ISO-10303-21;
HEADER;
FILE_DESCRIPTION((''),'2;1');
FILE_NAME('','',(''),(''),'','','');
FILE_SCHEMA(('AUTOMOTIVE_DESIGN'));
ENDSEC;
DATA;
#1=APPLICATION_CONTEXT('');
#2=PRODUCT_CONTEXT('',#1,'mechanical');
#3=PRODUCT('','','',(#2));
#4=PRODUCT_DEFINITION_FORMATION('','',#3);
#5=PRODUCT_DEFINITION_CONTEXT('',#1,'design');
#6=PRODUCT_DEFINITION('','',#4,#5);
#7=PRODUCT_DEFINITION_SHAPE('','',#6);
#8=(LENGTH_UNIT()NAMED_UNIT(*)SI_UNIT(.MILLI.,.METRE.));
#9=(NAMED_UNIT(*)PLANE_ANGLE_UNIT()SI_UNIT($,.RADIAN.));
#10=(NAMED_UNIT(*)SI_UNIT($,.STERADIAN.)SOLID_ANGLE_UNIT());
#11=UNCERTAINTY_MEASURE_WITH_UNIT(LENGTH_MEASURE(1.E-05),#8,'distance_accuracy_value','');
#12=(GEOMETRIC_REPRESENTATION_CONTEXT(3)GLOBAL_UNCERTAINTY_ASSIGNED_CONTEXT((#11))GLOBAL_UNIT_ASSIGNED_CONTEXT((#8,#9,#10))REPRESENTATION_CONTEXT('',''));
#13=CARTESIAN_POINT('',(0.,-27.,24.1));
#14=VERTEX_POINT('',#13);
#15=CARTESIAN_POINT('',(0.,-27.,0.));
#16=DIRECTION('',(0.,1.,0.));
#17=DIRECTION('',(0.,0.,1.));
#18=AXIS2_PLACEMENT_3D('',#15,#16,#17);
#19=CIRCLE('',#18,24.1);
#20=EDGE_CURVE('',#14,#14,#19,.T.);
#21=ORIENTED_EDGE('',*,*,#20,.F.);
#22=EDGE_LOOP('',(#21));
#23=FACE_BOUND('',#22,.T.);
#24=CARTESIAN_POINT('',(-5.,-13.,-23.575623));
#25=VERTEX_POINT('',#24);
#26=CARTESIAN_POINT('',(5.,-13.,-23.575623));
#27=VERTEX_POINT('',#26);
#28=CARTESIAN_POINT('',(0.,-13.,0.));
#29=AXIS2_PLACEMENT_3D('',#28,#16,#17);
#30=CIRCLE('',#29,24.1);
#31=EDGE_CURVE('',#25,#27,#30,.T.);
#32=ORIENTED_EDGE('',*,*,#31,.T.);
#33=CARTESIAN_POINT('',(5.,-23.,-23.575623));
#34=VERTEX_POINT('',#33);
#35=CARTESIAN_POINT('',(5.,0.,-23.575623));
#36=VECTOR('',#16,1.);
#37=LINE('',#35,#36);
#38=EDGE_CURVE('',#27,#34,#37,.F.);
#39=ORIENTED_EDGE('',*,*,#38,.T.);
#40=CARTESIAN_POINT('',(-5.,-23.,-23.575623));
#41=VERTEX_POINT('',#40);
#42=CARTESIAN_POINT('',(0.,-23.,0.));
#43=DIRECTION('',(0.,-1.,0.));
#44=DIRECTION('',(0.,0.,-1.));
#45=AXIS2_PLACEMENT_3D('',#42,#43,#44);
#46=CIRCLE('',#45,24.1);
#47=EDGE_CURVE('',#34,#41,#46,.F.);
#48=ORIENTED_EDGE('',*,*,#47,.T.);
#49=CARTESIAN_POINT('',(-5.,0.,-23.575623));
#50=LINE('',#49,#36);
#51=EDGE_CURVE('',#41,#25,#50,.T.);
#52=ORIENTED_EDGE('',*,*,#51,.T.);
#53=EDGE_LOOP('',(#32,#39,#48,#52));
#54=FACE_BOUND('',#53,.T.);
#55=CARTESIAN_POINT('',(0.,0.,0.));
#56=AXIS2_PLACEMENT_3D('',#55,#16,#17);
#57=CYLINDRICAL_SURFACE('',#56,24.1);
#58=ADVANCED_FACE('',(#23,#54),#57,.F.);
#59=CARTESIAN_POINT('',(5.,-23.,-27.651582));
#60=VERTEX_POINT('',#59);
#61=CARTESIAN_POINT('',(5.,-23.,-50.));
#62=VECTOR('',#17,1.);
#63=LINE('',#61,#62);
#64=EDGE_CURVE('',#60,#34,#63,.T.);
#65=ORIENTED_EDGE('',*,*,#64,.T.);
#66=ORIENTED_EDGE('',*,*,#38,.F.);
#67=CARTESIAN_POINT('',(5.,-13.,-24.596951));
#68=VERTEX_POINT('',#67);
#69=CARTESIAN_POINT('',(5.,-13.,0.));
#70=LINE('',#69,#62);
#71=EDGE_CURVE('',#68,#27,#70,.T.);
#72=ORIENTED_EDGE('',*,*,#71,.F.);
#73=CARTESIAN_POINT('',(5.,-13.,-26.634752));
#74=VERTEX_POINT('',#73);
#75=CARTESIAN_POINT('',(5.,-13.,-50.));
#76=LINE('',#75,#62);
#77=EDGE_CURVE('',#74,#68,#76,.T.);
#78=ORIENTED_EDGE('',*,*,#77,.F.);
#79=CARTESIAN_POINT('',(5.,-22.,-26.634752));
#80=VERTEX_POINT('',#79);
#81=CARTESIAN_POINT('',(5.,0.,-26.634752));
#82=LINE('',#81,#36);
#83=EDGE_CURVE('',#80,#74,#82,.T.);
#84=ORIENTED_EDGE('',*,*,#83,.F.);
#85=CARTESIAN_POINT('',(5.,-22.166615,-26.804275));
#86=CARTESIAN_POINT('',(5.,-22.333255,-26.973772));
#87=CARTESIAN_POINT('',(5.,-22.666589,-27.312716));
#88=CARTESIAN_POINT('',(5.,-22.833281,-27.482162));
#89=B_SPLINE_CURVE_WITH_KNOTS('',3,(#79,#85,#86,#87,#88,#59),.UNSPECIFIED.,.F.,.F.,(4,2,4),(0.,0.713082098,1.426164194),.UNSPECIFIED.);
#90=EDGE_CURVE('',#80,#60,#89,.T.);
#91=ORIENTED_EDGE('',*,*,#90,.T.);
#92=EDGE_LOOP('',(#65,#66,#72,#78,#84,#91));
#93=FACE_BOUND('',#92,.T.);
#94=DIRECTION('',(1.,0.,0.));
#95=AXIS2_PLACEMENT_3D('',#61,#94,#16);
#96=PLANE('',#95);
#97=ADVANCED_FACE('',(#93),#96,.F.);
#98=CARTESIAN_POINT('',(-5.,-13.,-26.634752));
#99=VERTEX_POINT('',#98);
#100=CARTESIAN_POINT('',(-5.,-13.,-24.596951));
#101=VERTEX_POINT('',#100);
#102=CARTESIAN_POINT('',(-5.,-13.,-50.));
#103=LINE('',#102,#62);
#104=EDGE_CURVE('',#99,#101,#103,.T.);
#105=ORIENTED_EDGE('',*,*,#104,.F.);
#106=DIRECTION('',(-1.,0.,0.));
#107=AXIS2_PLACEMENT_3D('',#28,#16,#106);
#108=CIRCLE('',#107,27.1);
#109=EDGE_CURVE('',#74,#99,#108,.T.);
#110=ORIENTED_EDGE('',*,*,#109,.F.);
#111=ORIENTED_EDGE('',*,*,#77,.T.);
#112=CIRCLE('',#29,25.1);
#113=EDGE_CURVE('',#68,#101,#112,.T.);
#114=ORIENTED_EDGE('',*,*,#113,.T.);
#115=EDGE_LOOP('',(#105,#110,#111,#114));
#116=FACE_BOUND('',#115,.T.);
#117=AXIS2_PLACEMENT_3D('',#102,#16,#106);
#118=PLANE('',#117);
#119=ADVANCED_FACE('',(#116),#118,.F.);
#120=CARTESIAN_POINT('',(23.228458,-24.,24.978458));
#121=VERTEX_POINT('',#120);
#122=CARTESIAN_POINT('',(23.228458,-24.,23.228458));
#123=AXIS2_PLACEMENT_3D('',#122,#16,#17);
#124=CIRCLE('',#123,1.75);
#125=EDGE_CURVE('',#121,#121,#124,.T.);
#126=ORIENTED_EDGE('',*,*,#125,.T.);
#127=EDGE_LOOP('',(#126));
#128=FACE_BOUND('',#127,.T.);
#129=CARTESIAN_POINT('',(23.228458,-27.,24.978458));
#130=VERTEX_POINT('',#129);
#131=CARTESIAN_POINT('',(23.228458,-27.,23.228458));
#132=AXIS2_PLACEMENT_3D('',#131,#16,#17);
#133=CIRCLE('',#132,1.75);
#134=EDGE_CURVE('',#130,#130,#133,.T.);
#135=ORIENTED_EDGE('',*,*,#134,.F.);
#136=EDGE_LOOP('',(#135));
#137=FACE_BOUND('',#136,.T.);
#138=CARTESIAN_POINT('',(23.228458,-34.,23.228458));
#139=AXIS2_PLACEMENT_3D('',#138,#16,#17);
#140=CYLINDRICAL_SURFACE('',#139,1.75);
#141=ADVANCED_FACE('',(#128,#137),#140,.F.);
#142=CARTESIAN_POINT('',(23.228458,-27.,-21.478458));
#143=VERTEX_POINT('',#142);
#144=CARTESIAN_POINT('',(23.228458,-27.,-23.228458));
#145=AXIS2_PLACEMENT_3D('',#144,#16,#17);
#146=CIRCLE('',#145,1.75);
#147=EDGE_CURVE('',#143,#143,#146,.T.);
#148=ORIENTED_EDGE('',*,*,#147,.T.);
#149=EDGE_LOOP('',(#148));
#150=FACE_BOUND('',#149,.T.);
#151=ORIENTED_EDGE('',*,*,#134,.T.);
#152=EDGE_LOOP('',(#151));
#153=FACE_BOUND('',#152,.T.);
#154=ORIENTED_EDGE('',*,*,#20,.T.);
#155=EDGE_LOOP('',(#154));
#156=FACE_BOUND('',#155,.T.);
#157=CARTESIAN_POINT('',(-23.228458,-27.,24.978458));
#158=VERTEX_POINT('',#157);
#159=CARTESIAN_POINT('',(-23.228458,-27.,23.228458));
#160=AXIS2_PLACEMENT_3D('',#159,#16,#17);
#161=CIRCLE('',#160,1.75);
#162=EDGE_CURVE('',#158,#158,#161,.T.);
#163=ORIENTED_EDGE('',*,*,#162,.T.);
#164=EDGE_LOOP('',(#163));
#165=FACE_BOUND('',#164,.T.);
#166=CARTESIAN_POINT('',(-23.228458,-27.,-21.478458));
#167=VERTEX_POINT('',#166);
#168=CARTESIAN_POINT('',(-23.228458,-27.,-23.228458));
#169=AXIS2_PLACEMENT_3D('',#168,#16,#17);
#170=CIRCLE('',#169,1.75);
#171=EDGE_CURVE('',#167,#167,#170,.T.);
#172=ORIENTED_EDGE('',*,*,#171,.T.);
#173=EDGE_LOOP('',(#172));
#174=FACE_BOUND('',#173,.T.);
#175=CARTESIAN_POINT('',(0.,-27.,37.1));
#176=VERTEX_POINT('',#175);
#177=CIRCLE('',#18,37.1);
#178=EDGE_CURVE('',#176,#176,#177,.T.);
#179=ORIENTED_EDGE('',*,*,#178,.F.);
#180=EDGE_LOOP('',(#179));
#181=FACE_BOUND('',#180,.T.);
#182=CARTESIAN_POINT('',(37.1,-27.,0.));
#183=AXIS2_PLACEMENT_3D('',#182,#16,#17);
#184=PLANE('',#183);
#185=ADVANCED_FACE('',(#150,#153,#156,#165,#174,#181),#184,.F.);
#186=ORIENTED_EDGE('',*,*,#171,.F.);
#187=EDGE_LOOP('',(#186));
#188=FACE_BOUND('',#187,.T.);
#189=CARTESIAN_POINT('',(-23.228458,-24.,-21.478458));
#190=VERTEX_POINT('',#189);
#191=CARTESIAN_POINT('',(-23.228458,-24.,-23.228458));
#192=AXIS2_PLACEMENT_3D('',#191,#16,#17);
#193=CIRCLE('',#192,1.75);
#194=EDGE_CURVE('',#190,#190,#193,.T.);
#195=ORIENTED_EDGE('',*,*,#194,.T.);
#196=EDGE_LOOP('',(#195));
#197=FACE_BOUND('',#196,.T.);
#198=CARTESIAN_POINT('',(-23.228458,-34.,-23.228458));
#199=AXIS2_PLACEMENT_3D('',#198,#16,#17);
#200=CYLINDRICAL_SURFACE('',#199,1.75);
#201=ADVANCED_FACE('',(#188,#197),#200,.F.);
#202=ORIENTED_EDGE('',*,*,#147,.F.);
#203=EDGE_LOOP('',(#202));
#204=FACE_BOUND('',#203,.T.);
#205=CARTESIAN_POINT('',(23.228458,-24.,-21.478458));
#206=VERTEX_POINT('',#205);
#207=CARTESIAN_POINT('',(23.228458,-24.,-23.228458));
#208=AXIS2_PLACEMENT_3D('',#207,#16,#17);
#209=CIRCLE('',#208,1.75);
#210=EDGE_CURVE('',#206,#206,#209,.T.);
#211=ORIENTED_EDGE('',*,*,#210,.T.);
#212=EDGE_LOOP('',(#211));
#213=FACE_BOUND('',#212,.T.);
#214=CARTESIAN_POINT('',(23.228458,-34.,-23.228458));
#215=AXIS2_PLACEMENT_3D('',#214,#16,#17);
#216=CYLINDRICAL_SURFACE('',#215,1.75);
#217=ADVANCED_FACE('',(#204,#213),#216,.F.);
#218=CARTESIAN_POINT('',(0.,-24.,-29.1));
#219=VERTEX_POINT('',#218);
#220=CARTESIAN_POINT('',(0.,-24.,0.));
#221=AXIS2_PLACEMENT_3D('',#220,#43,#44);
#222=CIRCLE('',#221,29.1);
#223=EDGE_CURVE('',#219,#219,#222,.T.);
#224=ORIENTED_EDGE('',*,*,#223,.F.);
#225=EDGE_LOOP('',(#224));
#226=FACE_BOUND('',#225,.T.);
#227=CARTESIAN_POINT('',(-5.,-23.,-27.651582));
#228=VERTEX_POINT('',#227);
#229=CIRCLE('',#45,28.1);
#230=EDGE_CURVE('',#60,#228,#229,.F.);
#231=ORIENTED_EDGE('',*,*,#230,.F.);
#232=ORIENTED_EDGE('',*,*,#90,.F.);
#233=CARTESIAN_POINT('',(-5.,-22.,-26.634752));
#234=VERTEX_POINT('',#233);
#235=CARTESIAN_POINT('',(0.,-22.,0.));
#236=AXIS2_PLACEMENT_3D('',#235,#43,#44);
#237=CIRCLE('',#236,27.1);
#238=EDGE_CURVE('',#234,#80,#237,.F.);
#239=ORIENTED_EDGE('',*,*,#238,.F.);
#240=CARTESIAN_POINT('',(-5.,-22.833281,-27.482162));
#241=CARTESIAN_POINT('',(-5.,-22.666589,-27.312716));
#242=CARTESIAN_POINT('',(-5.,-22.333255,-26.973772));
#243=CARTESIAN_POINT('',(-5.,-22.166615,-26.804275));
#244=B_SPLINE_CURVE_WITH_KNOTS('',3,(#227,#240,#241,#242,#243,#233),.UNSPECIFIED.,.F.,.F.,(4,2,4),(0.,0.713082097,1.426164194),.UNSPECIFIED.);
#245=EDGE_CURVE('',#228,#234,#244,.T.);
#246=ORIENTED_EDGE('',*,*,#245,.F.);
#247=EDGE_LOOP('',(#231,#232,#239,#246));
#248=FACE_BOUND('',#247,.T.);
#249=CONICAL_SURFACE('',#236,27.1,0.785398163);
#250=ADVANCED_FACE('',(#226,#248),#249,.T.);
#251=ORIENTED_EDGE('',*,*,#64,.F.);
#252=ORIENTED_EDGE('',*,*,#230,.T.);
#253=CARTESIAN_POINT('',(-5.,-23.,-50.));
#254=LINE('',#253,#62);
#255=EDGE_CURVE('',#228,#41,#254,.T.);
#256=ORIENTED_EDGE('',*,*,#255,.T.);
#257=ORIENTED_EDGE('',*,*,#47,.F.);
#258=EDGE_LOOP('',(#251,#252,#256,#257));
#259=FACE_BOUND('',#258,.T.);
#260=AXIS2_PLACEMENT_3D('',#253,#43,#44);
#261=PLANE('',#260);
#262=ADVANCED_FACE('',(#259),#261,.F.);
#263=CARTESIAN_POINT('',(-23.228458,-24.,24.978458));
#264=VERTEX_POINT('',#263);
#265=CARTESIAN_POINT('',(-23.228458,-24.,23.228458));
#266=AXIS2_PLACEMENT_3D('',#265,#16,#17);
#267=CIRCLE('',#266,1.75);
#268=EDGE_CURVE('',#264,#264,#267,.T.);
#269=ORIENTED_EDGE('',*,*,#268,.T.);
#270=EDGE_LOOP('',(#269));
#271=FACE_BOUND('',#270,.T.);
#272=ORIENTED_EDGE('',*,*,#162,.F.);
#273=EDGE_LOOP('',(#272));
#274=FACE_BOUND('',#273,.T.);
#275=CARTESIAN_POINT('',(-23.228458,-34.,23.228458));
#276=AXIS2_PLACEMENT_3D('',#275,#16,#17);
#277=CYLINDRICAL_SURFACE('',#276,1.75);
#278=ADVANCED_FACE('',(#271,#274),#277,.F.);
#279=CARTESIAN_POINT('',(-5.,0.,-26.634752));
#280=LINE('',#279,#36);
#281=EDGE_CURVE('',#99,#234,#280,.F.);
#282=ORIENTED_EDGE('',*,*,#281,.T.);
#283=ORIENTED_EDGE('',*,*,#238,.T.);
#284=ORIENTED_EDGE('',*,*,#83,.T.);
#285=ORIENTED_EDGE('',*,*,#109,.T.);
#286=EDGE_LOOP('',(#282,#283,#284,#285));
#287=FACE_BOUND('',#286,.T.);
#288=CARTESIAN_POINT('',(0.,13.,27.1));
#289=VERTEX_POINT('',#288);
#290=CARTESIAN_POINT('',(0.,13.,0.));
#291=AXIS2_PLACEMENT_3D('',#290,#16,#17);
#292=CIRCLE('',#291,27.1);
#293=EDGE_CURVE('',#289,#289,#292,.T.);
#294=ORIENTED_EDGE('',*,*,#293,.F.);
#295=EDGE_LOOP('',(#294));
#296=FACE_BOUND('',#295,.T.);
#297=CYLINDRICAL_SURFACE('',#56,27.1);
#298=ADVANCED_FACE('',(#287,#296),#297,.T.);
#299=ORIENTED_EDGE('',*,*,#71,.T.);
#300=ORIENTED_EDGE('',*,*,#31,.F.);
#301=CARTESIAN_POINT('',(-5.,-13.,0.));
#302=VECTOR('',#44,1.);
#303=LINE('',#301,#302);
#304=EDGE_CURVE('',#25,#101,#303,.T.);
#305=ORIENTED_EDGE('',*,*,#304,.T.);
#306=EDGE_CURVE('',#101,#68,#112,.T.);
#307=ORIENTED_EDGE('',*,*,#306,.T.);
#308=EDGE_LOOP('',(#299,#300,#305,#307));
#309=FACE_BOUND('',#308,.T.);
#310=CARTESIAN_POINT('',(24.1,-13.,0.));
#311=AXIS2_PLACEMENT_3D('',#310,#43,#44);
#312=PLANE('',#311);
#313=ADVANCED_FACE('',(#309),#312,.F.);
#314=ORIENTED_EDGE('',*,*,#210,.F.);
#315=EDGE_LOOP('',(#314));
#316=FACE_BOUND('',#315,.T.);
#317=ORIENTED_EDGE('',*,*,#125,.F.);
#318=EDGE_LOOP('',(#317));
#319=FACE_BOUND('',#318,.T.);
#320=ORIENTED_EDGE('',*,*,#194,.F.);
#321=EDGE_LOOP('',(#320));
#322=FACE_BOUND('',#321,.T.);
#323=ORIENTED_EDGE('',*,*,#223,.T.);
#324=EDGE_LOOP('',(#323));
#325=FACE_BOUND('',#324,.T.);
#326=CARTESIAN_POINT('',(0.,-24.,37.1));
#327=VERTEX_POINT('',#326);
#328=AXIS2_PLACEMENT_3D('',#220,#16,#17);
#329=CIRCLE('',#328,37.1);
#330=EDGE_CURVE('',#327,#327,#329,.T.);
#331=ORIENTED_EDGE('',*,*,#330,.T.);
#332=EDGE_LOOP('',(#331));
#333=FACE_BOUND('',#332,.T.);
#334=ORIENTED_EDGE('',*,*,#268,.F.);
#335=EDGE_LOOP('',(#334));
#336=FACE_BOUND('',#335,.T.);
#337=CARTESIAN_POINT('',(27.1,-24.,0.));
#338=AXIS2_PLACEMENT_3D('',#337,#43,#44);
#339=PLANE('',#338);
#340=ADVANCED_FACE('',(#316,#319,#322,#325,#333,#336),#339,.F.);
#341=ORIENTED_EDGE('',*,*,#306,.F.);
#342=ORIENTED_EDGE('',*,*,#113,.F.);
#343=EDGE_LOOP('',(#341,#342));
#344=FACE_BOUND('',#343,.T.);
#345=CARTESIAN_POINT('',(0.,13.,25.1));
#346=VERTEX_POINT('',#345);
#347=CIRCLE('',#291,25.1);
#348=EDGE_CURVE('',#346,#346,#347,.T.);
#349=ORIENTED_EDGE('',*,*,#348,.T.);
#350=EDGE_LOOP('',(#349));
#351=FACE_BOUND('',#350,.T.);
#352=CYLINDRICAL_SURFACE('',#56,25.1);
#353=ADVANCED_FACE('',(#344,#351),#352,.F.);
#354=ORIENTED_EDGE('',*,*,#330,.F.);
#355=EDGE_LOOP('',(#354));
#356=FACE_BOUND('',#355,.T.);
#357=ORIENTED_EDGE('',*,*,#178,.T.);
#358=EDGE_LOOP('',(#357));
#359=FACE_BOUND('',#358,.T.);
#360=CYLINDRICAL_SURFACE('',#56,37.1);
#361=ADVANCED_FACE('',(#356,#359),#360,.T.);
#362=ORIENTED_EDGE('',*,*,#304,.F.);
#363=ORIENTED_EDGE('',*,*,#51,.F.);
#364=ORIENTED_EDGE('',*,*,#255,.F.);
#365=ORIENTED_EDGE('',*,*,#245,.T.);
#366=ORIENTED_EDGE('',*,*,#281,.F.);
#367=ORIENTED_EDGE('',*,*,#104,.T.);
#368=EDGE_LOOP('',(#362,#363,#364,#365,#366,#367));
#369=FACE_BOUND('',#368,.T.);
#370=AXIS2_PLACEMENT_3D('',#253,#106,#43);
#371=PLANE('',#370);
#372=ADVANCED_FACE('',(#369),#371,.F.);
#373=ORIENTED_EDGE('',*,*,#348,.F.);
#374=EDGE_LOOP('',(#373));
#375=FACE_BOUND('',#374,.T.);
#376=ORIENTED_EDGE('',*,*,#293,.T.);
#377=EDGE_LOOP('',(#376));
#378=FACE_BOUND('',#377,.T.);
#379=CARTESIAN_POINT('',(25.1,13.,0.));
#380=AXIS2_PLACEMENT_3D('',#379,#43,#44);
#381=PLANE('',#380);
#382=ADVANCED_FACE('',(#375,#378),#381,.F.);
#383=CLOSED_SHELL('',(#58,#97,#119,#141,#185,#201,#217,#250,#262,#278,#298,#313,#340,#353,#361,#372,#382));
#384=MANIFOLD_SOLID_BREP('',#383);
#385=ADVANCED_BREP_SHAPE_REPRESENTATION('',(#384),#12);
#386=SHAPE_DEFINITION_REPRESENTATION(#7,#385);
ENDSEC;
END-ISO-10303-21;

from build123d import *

# Parameters (mm, degrees)
SKETCH3_R          = 1.75
CUT_EXTRUDE1_DEPTH = 10
SKETCH5_W          = 10
SKETCH5_H          = 10
CUT_EXTRUDE3_DEPTH = 50
CHAMFER1_START     = -23
CHAMFER1_2_DEPTH   = 2


with BuildPart() as part:
    # Sketch2 → Revolve1 (revolve)
    with BuildSketch(Plane.XY, mode=Mode.PRIVATE) as revolve1_sk:
        Polygon((25.1, 13), (27.1, 13), (27.1, -24), (37.1, -24), (37.1, -27), (24.1, -27), (24.1, -13), (25.1, -13), align=None)
    revolve(revolve1_sk.sketch.rotate(Axis((0, 0, 0), (0, -1, 0)), 90), axis=Axis((0, 0, 0), (0, -1, 0)))

    # Sketch3 → Cut-Extrude1 (cut)
    with BuildSketch(Plane(origin=(0, -24, 0), x_dir=(1, 0, 0), z_dir=(0, 1, 0))):
        with Locations(Location((-23.228457762, 23.228457762, 0), (0, 0, 270))):
            Circle(SKETCH3_R)
        with Locations(Location((23.228457762, 23.228457762, 0), (0, 0, 270))):
            Circle(SKETCH3_R)
        with Locations(Location((23.228457762, -23.228457762, 0), (0, 0, 270))):
            Circle(SKETCH3_R)
        with Locations(Location((-23.228457762, -23.228457762, 0), (0, 0, 270))):
            Circle(SKETCH3_R)
    extrude(amount=-CUT_EXTRUDE1_DEPTH, mode=Mode.SUBTRACT)

    # Sketch5 → Cut-Extrude3 (cut)
    with BuildSketch(Plane.XY):
        with Locations((0, -18)):
            Rectangle(SKETCH5_W, SKETCH5_H)
    extrude(amount=-CUT_EXTRUDE3_DEPTH, mode=Mode.SUBTRACT)

    # Chamfer1: read off the stored shape, not the designer's step
    # Chamfer1 outline → Chamfer1 (revolve)
    with BuildSketch(Plane.XY):
        Polygon((29.1, -24), (27.1, -22), (27.1, -24), align=None)
    revolve(axis=Axis((0, 0, 0), (0, 1, 0)))

    # Chamfer1 2 outline → Chamfer1 2 (cut)
    with BuildSketch(Plane(origin=(0, 0, 0), x_dir=(1, 0, 0), z_dir=(0, 1, 0)).offset(CHAMFER1_START)):
        with BuildLine():
            ThreePointArc((5, 27.651582233), (0, 28.1), (-5, 27.651582233))
            Line((-5, 27.651582233), (-5, 23.575623003))
            ThreePointArc((-5, 23.575623003), (0, 24.1), (5, 23.575623003))
            Line((5, 23.575623003), (5, 27.651582233))
        make_face()
    extrude(amount=CHAMFER1_2_DEPTH, mode=Mode.SUBTRACT)


solid = part.part
